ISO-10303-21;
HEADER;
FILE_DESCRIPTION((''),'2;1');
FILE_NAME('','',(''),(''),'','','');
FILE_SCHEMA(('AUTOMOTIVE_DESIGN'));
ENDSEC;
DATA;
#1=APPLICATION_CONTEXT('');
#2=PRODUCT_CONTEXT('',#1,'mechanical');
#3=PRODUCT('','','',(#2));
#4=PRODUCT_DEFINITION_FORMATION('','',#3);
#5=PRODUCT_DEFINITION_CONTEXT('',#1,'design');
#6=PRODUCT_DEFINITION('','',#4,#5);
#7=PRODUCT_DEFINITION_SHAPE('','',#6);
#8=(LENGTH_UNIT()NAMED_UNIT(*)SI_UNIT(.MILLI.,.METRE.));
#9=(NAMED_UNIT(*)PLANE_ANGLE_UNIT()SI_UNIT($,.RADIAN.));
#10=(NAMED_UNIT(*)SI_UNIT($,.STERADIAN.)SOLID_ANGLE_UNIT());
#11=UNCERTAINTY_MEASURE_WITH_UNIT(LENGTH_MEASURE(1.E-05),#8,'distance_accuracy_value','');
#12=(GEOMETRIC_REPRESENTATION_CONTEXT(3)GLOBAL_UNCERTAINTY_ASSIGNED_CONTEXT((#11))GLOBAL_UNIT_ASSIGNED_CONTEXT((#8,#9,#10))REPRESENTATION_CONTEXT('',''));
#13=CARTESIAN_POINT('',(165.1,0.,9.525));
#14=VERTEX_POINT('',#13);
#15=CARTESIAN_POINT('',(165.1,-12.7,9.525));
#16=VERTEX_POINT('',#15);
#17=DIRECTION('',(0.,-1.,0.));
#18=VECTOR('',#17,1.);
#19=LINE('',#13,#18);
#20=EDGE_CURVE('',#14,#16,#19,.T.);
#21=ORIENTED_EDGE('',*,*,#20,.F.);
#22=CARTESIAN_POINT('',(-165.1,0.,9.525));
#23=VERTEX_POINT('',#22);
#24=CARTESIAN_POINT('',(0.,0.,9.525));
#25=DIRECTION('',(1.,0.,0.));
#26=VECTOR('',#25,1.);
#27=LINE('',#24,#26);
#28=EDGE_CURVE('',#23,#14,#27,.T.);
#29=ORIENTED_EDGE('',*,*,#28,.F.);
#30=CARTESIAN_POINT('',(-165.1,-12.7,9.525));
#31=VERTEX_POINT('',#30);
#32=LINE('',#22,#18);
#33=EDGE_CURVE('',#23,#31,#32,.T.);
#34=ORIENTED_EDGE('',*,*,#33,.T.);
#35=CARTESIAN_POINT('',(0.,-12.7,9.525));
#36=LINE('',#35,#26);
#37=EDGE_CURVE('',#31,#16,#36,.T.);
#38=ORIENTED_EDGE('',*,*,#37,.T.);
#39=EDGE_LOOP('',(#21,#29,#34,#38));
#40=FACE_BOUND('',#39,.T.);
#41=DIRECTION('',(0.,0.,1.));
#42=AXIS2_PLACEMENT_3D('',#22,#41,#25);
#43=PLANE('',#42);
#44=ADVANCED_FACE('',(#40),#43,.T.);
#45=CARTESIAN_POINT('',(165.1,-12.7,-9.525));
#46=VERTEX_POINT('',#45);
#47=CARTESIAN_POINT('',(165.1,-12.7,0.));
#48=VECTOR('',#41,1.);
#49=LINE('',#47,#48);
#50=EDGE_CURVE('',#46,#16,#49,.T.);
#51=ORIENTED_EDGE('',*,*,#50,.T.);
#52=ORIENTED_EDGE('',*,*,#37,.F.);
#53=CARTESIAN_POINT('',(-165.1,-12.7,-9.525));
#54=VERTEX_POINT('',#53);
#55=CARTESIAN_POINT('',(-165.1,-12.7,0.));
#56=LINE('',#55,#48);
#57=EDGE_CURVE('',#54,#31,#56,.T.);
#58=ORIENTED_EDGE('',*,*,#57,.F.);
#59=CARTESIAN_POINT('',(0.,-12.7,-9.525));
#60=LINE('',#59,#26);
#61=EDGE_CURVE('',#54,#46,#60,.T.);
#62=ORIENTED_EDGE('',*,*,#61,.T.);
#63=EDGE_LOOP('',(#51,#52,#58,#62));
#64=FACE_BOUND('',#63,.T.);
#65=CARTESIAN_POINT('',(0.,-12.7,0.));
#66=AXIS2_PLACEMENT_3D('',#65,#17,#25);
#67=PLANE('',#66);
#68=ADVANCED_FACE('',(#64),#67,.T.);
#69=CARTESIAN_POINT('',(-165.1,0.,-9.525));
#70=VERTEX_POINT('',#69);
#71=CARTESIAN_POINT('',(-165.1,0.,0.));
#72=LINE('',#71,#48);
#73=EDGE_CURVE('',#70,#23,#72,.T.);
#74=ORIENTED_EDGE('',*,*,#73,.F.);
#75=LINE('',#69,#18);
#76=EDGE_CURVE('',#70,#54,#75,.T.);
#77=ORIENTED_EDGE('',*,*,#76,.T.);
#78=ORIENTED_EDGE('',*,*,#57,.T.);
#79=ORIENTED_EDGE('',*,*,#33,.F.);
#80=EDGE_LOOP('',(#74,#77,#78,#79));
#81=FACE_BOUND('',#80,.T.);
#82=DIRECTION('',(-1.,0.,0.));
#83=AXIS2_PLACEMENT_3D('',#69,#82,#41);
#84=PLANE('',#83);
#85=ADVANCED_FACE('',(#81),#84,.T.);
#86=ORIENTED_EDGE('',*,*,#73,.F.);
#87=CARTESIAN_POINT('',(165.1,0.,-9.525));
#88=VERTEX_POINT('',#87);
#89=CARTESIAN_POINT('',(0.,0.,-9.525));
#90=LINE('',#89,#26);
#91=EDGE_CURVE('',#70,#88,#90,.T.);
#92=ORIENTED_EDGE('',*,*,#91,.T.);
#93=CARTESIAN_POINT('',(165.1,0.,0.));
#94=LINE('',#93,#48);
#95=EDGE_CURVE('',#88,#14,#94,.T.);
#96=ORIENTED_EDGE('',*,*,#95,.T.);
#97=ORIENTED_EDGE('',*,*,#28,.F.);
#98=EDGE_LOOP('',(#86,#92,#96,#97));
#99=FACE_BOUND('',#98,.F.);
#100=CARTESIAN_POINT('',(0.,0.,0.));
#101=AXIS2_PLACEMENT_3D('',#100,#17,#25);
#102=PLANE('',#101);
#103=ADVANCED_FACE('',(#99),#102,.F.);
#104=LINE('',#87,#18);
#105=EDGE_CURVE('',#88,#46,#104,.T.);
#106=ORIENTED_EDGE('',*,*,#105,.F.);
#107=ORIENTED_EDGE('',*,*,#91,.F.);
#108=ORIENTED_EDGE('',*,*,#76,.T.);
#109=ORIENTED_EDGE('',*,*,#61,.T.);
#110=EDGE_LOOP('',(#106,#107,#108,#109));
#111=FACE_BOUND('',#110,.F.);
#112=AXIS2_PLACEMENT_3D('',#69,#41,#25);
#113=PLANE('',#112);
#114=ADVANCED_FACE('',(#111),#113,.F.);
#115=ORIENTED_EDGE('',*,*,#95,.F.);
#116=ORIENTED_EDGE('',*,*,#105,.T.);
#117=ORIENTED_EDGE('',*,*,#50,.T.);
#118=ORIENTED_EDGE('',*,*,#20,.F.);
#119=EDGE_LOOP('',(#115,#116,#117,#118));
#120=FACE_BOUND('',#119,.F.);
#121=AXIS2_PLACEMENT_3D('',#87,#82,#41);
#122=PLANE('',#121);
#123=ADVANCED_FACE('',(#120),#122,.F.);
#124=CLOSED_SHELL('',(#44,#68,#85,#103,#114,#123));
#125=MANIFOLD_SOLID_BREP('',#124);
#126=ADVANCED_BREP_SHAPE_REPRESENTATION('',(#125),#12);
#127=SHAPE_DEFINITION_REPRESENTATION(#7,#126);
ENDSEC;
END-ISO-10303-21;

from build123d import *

# Parameters (mm, degrees)
F0_W     = 330.2
F0_H     = 19.05
F1_DEPTH = 12.7


# Not quite as in the source:
# - a feature names something its author has since deleted; it is built from what else it names


with BuildPart() as f1:
    # F0 (on Front) → F1 (new body)
    with BuildSketch(Plane.XZ):
        Rectangle(F0_W, F0_H)
    extrude(amount=F1_DEPTH)


solid = f1.part
